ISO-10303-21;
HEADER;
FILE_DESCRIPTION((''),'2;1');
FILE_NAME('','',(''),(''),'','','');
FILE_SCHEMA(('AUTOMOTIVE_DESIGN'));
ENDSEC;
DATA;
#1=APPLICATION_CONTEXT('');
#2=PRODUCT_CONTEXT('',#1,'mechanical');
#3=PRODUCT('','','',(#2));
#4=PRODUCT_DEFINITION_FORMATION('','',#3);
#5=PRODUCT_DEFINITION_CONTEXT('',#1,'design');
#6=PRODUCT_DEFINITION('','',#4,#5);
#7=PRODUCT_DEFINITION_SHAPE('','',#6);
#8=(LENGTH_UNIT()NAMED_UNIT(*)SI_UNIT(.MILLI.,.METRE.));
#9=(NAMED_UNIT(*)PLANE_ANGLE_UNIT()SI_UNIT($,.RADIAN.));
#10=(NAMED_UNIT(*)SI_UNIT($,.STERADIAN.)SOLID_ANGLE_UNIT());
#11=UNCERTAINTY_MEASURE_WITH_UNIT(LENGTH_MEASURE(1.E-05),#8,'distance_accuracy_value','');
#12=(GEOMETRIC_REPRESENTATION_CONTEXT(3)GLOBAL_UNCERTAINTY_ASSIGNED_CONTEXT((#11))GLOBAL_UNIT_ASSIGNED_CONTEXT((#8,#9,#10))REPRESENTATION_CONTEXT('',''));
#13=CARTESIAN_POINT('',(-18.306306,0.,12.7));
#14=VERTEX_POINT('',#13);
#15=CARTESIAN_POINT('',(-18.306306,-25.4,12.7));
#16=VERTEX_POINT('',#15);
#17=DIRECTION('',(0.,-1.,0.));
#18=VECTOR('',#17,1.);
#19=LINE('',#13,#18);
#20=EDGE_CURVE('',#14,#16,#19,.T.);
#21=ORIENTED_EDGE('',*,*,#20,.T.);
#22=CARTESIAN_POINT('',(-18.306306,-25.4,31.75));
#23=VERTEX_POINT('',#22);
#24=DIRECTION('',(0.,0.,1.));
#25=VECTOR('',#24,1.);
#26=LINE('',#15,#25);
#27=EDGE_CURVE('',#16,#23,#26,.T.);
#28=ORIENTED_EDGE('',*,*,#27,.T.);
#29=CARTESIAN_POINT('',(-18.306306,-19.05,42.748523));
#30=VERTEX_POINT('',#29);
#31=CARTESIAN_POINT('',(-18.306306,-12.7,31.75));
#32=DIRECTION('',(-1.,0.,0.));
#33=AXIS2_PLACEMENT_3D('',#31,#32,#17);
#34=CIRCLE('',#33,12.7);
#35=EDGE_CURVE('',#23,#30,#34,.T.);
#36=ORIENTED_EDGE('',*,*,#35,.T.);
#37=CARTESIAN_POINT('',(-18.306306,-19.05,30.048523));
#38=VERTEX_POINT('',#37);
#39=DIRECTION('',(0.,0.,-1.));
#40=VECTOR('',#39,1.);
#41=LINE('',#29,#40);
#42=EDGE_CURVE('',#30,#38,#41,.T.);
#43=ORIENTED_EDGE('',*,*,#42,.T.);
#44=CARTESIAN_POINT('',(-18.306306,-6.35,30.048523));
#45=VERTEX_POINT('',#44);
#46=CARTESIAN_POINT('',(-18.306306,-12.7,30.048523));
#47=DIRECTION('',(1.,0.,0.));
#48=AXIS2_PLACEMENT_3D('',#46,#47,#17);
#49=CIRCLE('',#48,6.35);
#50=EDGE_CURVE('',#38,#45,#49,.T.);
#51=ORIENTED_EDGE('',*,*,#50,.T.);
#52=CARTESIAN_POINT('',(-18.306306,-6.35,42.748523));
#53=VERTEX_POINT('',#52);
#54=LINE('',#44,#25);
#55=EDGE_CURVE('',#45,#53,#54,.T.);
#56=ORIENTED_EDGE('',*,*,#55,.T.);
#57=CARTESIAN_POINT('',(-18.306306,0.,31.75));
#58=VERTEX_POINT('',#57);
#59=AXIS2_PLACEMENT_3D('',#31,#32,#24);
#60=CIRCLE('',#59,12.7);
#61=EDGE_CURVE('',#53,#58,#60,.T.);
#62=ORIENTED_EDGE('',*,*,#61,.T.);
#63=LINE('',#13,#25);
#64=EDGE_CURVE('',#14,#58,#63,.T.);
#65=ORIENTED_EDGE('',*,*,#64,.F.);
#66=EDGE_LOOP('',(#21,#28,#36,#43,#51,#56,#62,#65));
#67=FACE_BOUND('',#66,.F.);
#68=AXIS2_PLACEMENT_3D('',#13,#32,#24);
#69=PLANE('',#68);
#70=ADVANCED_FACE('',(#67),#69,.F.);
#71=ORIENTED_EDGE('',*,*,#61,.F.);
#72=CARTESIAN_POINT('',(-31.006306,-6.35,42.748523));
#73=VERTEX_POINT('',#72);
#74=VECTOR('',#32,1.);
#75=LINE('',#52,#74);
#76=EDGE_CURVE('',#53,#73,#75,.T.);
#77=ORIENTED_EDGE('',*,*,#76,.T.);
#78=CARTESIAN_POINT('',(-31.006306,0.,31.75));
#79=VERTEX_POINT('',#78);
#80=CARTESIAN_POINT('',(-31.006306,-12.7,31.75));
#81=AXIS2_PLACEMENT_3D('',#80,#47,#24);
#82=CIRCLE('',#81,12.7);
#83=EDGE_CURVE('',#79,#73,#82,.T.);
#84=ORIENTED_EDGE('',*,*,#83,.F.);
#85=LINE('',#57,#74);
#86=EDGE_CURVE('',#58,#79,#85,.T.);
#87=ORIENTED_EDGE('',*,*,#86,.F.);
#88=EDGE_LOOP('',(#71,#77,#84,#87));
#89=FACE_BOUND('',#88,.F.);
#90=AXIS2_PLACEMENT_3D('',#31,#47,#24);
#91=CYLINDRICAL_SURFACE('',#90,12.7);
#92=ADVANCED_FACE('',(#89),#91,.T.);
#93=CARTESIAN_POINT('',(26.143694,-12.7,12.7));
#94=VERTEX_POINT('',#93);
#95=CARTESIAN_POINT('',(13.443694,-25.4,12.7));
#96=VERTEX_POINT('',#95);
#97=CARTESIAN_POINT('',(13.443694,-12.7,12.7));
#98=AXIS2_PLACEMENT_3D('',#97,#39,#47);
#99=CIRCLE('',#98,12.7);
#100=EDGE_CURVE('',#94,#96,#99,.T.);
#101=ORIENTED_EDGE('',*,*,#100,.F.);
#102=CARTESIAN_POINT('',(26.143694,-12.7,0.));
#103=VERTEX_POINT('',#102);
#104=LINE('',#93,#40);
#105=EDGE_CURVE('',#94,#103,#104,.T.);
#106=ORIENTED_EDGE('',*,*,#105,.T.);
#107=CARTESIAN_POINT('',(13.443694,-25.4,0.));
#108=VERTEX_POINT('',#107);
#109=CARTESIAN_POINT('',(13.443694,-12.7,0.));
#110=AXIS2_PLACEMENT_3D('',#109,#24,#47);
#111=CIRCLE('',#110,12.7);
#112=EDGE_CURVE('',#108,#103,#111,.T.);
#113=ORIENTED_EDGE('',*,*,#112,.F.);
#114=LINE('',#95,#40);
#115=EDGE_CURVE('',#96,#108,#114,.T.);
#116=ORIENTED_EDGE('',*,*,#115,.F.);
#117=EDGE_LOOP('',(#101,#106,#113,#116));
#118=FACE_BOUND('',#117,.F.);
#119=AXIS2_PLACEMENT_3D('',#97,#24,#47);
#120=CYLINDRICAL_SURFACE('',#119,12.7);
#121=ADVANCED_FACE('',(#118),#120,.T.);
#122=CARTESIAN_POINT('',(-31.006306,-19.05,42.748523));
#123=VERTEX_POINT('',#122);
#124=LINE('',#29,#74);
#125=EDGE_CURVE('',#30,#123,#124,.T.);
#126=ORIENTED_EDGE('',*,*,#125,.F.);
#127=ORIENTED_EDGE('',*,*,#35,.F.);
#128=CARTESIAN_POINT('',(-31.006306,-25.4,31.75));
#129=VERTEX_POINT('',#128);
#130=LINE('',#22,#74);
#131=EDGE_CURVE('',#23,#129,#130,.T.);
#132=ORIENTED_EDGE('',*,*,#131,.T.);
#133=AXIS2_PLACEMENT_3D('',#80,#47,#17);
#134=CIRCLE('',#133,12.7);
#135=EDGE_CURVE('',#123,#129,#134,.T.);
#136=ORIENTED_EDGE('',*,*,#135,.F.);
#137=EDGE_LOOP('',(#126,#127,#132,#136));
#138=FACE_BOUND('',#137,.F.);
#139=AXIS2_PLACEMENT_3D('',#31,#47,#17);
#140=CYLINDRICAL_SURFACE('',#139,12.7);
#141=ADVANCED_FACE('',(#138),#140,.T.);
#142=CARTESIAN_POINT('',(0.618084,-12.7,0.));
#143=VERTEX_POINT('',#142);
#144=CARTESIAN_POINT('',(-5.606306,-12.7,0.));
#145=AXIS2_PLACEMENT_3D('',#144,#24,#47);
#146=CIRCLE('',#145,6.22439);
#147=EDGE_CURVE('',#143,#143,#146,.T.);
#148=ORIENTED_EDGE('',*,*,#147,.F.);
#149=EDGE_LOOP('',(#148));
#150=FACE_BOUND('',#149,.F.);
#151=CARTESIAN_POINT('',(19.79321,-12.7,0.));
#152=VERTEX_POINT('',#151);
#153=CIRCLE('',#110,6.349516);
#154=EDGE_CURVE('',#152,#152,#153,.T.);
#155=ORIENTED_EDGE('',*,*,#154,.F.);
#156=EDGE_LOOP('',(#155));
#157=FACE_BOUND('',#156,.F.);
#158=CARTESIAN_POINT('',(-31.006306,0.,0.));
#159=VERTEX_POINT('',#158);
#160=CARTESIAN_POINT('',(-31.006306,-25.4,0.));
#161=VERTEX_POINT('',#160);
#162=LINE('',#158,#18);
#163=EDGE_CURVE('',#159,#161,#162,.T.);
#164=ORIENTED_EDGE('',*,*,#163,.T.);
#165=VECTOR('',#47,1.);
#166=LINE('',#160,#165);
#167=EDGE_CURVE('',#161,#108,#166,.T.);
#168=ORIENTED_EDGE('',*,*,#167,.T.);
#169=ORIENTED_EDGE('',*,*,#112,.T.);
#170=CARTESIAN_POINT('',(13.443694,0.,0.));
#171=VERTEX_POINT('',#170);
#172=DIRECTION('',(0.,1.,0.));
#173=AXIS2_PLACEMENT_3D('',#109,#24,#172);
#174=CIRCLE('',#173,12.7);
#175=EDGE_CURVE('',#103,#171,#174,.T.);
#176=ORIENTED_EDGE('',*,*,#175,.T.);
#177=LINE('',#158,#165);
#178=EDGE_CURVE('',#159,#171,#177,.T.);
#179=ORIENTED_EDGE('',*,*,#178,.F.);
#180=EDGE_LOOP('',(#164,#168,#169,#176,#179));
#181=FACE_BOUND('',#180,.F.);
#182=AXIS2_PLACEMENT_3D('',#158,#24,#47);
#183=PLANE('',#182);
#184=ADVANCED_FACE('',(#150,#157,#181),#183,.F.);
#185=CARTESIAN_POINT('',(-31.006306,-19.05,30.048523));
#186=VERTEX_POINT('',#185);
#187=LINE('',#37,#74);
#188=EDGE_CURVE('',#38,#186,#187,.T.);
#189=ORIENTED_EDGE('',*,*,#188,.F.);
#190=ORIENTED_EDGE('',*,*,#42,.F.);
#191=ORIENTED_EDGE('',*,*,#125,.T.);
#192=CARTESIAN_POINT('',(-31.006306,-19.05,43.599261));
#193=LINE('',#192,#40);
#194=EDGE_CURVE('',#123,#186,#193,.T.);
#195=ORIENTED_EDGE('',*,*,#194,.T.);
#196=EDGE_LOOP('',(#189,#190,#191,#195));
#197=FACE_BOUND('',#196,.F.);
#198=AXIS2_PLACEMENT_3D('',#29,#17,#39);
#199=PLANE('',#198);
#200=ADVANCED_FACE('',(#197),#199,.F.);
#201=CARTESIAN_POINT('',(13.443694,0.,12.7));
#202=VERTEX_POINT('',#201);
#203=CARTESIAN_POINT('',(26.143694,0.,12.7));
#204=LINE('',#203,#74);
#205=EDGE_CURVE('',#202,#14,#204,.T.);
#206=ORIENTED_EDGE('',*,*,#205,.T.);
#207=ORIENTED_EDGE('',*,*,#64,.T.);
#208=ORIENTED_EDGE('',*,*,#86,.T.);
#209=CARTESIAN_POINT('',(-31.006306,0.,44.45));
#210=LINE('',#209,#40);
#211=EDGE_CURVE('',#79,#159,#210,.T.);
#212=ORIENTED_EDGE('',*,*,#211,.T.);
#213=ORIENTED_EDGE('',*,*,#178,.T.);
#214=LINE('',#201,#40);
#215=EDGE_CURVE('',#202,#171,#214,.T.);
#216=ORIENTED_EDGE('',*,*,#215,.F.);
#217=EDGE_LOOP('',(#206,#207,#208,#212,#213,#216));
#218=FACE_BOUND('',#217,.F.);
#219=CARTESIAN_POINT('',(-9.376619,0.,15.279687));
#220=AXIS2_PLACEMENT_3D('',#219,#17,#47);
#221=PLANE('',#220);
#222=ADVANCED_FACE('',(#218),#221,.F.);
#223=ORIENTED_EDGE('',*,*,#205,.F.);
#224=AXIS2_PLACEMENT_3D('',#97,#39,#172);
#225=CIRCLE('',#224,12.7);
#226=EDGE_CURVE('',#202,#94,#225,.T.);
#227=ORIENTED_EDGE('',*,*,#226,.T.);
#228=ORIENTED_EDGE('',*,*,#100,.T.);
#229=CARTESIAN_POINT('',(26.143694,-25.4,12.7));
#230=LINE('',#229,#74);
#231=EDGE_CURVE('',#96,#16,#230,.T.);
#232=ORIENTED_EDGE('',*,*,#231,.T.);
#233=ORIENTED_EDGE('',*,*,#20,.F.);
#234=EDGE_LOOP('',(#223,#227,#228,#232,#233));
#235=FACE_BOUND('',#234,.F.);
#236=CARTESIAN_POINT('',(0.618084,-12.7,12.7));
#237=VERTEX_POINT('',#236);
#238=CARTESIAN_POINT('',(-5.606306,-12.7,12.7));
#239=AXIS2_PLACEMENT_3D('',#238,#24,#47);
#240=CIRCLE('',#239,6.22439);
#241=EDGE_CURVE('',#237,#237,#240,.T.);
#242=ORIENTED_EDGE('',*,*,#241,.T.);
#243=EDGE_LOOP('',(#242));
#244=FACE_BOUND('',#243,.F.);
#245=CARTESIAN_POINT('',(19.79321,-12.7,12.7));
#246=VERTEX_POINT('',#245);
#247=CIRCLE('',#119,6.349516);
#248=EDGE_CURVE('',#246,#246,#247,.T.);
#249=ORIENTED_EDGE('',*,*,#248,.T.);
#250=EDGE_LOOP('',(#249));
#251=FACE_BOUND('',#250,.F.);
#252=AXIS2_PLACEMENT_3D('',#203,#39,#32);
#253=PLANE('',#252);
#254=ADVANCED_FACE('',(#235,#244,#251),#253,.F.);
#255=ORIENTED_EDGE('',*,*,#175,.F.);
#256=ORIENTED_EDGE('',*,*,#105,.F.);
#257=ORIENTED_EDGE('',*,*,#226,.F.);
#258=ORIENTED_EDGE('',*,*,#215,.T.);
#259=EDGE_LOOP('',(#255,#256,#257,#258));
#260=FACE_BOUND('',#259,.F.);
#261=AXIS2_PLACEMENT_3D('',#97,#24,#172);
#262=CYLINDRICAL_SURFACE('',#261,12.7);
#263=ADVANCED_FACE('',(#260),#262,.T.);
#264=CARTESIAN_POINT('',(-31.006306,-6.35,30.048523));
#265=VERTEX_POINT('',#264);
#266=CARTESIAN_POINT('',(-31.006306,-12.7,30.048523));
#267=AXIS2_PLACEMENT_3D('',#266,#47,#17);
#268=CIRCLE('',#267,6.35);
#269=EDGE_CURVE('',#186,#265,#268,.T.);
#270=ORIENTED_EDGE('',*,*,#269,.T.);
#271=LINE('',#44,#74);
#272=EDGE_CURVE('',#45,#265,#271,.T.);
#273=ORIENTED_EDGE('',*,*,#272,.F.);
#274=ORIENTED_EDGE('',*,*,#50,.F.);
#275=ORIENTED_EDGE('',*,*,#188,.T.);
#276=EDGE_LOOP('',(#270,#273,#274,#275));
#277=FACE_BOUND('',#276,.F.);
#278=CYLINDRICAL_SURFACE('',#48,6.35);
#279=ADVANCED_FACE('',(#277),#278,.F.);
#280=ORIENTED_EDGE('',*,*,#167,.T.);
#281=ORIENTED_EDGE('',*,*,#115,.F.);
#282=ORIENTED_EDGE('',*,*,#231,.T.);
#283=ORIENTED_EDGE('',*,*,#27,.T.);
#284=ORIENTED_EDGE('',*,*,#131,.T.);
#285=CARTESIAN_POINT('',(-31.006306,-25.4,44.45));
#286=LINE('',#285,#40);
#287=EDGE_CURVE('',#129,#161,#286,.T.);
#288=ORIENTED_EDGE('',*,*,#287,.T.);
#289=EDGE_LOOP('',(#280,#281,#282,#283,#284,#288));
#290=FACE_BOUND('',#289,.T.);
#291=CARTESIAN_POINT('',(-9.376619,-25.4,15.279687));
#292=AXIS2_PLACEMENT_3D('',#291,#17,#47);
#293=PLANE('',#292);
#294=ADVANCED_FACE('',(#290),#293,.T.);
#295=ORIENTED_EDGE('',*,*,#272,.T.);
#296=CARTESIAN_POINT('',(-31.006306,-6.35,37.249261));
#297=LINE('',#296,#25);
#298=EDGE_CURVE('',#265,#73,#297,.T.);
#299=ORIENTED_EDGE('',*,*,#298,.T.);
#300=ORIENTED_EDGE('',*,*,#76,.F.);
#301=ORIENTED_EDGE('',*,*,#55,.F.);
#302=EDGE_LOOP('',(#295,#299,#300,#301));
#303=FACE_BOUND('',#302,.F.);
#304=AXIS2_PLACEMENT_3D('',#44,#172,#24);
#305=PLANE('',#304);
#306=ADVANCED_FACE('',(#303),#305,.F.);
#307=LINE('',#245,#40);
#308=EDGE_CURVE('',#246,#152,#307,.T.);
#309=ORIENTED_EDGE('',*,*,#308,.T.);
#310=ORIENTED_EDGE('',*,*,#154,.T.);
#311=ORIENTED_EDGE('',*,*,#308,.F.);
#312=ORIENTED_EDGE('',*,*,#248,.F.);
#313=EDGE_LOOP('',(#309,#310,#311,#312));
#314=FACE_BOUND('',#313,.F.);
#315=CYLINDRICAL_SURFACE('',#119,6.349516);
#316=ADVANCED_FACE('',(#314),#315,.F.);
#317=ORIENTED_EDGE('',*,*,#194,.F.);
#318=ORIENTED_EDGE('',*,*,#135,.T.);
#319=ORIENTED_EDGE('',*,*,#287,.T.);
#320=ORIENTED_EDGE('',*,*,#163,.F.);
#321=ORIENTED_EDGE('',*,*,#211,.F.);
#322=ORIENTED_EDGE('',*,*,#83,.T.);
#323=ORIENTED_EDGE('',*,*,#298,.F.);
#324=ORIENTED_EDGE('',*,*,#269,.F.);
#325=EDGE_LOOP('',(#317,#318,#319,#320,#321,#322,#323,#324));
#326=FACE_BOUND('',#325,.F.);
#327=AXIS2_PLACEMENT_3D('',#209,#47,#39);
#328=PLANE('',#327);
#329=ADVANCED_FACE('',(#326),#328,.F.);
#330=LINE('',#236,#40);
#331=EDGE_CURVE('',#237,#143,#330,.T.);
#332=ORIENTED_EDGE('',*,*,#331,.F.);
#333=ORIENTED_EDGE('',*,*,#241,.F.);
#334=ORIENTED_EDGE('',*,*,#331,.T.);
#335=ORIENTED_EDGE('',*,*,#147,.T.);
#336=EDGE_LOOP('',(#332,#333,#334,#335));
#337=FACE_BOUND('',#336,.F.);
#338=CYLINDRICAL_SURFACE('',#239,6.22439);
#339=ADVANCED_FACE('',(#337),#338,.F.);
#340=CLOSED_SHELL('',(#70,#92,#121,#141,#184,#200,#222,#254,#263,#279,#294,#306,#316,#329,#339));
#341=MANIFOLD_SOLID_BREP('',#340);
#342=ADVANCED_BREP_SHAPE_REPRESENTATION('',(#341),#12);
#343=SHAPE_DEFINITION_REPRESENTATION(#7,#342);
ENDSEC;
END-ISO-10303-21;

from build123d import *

# Parameters (mm, degrees)
F1_DEPTH  = 25.4
F2_R      = 6.2243902107
F2_R_2    = 6.3495156859
F3_DEPTH  = 12.701
F6_DEPTH  = 12.701
F8_DEPTH  = 12.701
F10_DEPTH = 12.701
F11_DEPTH = 12.701
F12_DEPTH = 12.701


# Not quite as in the source:
# - a feature names something its author has since deleted; it is built from what else it names


with BuildPart() as f1:
    # F0 (on Front) → F1 (new body)
    with BuildSketch(Plane.XZ):
        Polygon((-18.3063060958, 44.45), (-31.0063060958, 44.45), (-31.0063060958, 0), (26.1436939042, 0), (26.1436939042, 12.7), (-18.3063060958, 12.7), align=None)
    extrude(amount=F1_DEPTH)

    # F2 (on face) → F3 (cut, through all)
    with BuildSketch(Plane.XY.offset(12.7)):
        with Locations((-5.6063060958, -12.7)):
            Circle(F2_R)
        with Locations((13.4436939042, -12.7)):
            Circle(F2_R_2)
    extrude(amount=-F3_DEPTH, mode=Mode.SUBTRACT)

    # F4 (on face) → F6 (cut, through all)
    with BuildSketch(Plane.XY.offset(12.7)):
        with BuildLine():
            ThreePointArc((13.4436939042, 0), (22.4239500253, -3.7197438789), (26.1436939042, -12.7))
            Line((26.1436939042, -12.7), (26.1436939042, 0))
            Line((26.1436939042, 0), (13.4436939042, 0))
        make_face()
        with BuildLine():
            ThreePointArc((26.1436939042, -12.7), (22.4239500253, -21.6802561211), (13.4436939042, -25.4))
            Line((13.4436939042, -25.4), (26.1436939042, -25.4))
            Line((26.1436939042, -25.4), (26.1436939042, -12.7))
        make_face()
    extrude(amount=-F6_DEPTH, mode=Mode.SUBTRACT)

    # F7 (on face) → F8 (cut, through all)
    with BuildSketch(Plane.YZ.offset(-18.3063060958)):
        with BuildLine():
            ThreePointArc((-12.7, 44.45), (-3.7197438789, 40.7302561211), (0, 31.75))
            Line((0, 31.75), (0, 44.45))
            Line((0, 44.45), (-12.7, 44.45))
        make_face()
        with BuildLine():
            ThreePointArc((-25.4, 31.75), (-21.6802561211, 40.7302561211), (-12.7, 44.45))
            Line((-12.7, 44.45), (-25.4, 44.45))
            Line((-25.4, 44.45), (-25.4, 31.75))
        make_face()
    extrude(amount=-F8_DEPTH, mode=Mode.SUBTRACT)

    # F9 (on face) → F10 (cut, through all)
    with BuildSketch(Plane.YZ.offset(-18.3063060958)):
        with BuildLine():
            ThreePointArc((-12.7, 44.45), (-15.9870018728, 44.0172579939), (-19.05, 42.7485226281))
            Line((-19.05, 42.7485226281), (-19.05, 30.0485226281))
            ThreePointArc((-19.05, 30.0485226281), (-12.7, 23.6985226281), (-6.35, 30.0485226281))
            Line((-6.35, 30.0485226281), (-6.35, 42.7485226281))
            ThreePointArc((-6.35, 42.7485226281), (-9.4129981272, 44.0172579939), (-12.7, 44.45))
        make_face()
    extrude(amount=-F10_DEPTH, mode=Mode.SUBTRACT)

    # F7 (on face) → F11 (cut, through all)
    with BuildSketch(Plane.YZ.offset(-18.3063060958)):
        with BuildLine():
            ThreePointArc((-12.7, 44.45), (-3.7197438789, 40.7302561211), (0, 31.75))
            Line((0, 31.75), (0, 44.45))
            Line((0, 44.45), (-12.7, 44.45))
        make_face()
    extrude(amount=-F11_DEPTH, mode=Mode.SUBTRACT)

    # F7 (on face) → F12 (cut, through all)
    with BuildSketch(Plane.YZ.offset(-18.3063060958)):
        with BuildLine():
            ThreePointArc((-25.4, 31.75), (-21.6802561211, 40.7302561211), (-12.7, 44.45))
            Line((-12.7, 44.45), (-25.4, 44.45))
            Line((-25.4, 44.45), (-25.4, 31.75))
        make_face()
        with BuildLine():
            ThreePointArc((-12.7, 44.45), (-3.7197438789, 40.7302561211), (0, 31.75))
            Line((0, 31.75), (0, 44.45))
            Line((0, 44.45), (-12.7, 44.45))
        make_face()
    extrude(amount=-F12_DEPTH, mode=Mode.SUBTRACT)


solid = f1.part
